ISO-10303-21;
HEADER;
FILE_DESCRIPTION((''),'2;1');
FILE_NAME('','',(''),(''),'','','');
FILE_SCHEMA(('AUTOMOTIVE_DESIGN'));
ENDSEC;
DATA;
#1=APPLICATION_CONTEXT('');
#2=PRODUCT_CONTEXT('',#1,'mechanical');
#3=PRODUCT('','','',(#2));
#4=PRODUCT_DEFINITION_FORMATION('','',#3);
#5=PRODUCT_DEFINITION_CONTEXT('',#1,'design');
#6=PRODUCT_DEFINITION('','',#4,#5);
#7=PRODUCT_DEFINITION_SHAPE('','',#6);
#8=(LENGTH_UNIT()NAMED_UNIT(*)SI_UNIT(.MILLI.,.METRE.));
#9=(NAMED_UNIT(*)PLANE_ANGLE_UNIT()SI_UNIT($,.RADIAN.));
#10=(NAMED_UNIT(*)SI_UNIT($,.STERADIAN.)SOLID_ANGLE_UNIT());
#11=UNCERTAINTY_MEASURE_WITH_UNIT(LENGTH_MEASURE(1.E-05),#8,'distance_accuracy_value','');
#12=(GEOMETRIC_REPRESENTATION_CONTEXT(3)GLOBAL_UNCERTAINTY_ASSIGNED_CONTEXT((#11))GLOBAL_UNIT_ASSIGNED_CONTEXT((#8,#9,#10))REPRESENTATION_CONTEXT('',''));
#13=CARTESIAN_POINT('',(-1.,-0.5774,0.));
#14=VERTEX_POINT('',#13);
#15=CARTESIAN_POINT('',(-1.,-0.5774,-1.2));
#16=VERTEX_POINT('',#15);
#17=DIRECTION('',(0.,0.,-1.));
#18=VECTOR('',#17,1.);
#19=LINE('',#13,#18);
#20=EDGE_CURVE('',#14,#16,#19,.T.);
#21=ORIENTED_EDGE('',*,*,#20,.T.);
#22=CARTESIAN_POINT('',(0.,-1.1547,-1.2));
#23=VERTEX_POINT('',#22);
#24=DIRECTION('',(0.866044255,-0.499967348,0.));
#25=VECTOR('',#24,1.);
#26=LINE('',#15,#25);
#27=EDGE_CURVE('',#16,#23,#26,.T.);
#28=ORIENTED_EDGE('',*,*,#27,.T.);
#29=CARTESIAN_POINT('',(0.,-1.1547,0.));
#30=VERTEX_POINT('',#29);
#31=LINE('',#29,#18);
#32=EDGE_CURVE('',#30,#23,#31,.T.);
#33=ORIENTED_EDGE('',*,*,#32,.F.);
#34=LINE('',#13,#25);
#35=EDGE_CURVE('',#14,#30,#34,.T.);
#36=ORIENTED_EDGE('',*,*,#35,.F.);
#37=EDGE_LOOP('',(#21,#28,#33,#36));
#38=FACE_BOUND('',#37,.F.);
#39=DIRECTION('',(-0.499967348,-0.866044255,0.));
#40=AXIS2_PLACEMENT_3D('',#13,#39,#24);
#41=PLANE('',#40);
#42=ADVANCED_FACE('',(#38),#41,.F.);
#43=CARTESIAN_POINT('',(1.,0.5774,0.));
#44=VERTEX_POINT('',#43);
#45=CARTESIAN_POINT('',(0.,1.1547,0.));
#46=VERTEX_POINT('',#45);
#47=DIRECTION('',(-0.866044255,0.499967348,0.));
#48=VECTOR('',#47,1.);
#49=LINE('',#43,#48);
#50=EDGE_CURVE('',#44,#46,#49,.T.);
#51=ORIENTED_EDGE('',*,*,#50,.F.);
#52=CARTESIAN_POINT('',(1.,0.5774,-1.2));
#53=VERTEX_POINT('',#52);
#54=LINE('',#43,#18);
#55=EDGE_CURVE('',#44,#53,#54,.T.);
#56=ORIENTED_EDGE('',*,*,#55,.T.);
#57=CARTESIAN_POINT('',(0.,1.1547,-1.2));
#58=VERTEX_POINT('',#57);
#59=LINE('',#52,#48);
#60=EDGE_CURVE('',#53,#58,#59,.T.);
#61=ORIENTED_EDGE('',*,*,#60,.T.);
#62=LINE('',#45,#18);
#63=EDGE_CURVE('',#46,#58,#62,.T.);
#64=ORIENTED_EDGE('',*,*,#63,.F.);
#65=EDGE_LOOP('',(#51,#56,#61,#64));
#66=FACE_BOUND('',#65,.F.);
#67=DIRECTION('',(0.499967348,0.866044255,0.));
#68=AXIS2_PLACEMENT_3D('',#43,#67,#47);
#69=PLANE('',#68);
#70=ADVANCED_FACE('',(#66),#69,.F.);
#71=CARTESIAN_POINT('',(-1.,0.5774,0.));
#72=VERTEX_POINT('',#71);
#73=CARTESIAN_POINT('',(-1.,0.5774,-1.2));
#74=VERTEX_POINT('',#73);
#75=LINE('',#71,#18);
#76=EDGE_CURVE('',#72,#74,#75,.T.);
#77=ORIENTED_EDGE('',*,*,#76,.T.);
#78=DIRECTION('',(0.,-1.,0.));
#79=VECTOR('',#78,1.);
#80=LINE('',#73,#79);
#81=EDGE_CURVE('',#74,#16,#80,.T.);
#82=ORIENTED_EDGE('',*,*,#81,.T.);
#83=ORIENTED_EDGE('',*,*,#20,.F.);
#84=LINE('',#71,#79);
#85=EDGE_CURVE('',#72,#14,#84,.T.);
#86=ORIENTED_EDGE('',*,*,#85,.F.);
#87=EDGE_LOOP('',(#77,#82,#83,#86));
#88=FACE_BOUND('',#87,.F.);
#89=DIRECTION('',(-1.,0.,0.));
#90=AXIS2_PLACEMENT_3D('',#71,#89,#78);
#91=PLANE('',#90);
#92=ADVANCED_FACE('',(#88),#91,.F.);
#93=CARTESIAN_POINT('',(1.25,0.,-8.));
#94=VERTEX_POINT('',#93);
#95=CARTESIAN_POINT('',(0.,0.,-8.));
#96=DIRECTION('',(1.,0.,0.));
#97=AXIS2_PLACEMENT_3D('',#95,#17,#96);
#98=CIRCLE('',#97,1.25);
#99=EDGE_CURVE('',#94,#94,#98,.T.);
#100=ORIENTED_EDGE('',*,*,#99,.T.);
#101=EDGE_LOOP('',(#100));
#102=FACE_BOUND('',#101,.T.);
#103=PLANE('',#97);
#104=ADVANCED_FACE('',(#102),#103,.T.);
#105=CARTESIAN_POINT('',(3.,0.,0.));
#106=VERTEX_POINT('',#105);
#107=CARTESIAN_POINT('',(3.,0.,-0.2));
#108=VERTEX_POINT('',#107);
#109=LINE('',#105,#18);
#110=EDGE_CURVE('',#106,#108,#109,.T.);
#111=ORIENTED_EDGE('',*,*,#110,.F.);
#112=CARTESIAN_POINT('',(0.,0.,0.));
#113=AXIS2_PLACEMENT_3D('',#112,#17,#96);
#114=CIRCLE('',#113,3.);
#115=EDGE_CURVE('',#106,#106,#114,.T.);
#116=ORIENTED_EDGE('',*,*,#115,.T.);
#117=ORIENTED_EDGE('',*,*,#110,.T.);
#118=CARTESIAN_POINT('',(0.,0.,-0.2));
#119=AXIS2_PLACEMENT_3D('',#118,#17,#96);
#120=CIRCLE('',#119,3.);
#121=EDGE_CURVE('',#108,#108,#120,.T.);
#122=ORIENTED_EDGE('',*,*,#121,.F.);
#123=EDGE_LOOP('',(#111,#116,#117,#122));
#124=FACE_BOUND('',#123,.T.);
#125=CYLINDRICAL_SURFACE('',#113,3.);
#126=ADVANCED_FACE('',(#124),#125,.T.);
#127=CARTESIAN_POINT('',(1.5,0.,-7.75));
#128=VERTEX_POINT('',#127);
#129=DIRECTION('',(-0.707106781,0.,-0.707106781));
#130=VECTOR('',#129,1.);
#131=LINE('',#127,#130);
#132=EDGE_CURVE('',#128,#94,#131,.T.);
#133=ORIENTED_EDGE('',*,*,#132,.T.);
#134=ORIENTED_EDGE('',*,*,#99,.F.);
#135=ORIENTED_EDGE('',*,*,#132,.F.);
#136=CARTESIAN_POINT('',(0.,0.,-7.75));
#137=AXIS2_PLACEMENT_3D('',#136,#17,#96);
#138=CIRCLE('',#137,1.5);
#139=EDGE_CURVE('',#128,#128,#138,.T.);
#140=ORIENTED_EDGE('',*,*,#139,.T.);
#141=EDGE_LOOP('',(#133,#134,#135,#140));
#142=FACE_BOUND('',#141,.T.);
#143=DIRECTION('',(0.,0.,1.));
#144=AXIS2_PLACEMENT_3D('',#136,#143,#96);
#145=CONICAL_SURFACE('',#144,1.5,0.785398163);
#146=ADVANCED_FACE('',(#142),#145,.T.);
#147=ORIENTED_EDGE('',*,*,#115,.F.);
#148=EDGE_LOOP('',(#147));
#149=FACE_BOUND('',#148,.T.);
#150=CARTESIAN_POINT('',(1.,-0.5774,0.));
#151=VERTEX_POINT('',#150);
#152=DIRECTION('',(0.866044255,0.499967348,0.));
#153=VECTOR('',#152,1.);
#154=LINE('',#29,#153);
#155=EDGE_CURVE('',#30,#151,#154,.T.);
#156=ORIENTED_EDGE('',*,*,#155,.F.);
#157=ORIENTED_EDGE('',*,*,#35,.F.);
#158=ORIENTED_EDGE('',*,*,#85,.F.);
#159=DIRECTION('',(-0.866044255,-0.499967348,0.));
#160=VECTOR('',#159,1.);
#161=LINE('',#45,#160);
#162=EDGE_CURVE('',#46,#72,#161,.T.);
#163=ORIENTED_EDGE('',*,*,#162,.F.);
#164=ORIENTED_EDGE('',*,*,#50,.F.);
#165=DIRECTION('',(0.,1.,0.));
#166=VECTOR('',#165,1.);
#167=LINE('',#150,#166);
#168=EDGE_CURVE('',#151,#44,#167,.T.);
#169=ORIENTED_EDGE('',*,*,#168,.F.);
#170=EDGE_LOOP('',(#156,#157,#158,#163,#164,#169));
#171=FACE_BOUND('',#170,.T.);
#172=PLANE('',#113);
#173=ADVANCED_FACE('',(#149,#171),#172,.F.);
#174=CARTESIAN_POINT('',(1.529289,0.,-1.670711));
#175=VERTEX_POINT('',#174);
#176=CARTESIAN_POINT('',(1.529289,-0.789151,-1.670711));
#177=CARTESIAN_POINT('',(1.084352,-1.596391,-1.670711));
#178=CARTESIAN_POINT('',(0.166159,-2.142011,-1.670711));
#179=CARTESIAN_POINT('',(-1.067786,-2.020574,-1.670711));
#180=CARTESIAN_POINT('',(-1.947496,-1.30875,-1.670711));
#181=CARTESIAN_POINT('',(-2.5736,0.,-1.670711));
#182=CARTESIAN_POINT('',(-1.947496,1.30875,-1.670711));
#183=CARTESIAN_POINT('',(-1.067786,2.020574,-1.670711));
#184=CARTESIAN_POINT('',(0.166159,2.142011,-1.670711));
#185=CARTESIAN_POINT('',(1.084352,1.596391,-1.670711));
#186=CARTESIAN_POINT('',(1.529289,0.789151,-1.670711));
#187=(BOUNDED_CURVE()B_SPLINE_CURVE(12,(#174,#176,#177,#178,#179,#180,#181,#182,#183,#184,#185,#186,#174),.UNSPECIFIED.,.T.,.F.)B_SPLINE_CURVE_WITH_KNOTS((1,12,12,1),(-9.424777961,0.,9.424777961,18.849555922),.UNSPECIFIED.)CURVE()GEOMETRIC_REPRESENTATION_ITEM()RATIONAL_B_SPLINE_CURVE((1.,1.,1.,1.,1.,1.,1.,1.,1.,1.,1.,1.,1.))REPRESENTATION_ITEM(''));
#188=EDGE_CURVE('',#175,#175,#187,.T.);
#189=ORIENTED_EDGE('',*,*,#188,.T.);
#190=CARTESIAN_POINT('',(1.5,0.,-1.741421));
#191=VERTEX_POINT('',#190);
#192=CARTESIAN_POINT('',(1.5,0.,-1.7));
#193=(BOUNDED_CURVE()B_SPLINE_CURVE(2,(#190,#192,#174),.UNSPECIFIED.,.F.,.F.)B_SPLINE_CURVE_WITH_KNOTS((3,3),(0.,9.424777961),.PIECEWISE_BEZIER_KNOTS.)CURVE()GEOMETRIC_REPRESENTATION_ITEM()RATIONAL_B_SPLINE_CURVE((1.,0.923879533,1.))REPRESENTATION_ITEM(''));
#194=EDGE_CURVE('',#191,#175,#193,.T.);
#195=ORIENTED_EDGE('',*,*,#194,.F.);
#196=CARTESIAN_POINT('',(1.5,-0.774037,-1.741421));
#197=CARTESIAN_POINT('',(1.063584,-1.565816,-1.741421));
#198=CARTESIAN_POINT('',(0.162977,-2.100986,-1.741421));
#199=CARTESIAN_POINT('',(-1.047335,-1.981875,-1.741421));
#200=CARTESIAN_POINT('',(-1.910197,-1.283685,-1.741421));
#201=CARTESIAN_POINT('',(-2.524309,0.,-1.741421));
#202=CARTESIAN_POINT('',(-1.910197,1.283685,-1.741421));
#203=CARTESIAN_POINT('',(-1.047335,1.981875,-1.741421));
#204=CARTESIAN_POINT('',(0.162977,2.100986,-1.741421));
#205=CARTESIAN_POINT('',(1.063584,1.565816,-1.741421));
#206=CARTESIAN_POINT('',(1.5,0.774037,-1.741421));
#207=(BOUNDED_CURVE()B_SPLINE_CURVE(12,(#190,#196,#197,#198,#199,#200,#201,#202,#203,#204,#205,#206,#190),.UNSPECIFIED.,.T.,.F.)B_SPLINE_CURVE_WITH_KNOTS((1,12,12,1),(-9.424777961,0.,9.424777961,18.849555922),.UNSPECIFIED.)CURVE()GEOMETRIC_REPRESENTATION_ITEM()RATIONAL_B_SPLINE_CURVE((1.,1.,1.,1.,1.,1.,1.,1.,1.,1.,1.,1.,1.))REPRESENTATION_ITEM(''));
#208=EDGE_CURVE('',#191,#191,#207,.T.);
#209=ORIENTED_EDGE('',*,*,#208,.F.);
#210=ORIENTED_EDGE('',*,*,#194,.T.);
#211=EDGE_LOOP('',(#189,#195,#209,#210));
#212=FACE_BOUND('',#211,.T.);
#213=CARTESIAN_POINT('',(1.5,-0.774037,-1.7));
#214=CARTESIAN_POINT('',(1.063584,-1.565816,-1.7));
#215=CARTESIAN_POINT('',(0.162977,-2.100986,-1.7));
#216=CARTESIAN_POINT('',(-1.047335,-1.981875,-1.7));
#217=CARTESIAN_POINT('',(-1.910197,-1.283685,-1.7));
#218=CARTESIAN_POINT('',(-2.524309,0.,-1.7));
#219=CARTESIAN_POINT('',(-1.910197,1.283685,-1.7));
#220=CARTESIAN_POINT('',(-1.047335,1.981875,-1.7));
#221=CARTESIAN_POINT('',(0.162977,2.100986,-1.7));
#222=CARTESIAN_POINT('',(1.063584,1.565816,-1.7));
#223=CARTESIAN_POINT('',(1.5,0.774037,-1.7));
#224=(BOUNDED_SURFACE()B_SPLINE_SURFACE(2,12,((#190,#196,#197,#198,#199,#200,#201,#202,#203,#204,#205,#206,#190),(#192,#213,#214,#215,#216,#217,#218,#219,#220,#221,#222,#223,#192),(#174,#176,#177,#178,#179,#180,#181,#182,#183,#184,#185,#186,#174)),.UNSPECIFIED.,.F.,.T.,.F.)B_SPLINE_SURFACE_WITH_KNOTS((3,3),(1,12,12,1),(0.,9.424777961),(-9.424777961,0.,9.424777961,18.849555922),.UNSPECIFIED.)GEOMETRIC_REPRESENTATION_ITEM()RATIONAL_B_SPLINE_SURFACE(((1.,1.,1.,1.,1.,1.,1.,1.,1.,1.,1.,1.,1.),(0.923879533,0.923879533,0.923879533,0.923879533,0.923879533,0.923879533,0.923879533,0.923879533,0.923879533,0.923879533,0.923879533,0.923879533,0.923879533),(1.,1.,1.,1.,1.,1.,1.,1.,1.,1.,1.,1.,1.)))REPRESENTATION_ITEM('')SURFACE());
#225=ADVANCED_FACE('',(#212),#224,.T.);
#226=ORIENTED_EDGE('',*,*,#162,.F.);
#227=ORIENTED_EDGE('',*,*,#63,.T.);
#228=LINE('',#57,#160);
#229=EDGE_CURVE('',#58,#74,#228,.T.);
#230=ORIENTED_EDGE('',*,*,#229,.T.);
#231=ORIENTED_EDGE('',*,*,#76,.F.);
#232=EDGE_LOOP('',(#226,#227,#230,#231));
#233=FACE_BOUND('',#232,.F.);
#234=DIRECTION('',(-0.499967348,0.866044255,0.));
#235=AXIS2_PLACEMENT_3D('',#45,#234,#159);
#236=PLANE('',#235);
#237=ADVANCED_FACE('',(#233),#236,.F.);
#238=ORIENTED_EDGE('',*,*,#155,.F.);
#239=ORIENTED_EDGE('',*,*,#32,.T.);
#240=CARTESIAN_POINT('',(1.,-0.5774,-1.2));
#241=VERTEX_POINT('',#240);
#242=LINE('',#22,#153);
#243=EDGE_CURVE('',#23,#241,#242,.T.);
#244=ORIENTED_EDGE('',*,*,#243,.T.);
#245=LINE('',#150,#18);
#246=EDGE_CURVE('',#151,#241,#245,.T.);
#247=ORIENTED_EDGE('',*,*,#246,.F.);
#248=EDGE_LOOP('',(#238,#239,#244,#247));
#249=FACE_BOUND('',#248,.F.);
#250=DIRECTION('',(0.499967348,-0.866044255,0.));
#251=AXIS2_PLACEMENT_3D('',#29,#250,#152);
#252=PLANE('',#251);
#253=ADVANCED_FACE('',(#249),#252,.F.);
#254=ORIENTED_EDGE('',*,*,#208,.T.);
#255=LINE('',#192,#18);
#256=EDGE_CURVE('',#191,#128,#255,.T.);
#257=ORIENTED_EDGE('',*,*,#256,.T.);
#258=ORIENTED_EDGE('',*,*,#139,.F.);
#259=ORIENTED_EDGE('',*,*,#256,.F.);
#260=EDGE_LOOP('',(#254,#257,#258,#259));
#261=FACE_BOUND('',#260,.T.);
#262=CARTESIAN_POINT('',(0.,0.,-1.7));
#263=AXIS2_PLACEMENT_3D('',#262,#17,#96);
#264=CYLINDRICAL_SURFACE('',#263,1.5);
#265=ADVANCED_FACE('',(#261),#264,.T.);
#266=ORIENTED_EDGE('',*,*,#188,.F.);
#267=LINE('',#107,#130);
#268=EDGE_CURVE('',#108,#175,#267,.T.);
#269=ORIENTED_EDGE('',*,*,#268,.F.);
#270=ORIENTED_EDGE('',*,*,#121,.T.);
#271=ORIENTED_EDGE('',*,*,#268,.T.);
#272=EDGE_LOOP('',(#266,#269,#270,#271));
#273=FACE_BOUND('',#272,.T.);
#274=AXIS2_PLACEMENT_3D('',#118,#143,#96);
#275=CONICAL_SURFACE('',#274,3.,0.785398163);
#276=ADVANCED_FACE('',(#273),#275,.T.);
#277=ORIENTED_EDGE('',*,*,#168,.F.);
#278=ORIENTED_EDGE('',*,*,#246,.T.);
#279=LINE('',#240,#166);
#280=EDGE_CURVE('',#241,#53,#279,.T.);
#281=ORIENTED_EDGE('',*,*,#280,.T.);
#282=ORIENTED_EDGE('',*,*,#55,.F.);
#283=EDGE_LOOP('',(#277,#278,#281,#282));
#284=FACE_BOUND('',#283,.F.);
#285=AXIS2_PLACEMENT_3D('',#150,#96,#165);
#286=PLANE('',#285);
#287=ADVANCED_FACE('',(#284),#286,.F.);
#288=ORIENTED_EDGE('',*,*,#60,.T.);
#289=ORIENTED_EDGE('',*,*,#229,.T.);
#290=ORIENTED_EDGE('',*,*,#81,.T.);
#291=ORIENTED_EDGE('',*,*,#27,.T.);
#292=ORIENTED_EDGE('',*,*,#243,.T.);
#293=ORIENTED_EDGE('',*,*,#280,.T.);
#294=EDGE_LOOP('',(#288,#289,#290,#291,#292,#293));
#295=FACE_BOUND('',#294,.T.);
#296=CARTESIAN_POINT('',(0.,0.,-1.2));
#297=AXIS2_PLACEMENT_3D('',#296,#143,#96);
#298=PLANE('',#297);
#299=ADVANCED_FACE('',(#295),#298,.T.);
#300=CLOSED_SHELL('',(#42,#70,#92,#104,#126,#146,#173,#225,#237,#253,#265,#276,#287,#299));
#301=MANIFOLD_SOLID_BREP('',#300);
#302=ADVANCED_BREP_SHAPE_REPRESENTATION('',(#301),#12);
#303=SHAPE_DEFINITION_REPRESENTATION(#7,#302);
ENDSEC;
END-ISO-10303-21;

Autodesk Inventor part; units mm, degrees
ref_plane "YZ Plane" through (0, 0, 0) normal (1, 0, 0) x (0, 1, 0)
sketch "Skizze1" plane through (0, 0, 0) normal (0, 1, 0) x (-1, 0, 0)
  point P0 (0, 0)
sketch "Skizze2" plane through (0, 0, 0) normal (0, 1, 0) x (-1, 0, 0)
  line L0 (-1.5, -8) -> (0, -8)
  line L1 (-1.5, -1.7) -> (-1.5, -8)
  line L2 (-3, -0.2) -> (-1.5, -1.7)
  line L3 (-3, 0) -> (-3, -0.2)
  line L4 (0, 0) -> (-3, 0)
  line L5 (0, -8) -> (0, 0)
  line L6 (0, -8) -> (0, 0)
  line L7 (0, -9.6) -> (0, 1.6) projected
  line L8 (0.6, 0) -> (-3.6, 0) projected
  dimension "d3" = 3
  dimension "d5" = 1.5
  dimension "d7" = 8
  dimension "ParC" = 0.2
  dimension "d22" = 0
  dimension "d23" = 0
  dimension "d43" = 45
revolve "Drehung1" add sketch "Skizze2" angle 360 about axis through (0, 0, -8) along (0, 0, -1)
sketch "Skizze3" plane through (0, 0, 0) normal (0, 0, 1) x (1, 0, 0)
  line L0 (-1, 0.5774) -> (-1, -0.5774)
  line L1 (0, 1.1547) -> (-1, 0.5774)
  line L2 (1, 0.5774) -> (0, 1.1547)
  line L3 (1, -0.5774) -> (1, 0.5774)
  line L4 (0, -1.1547) -> (1, -0.5774)
  line L5 (-1, -0.5774) -> (0, -1.1547)
  circle A0 centre (0, 0) radius 1 construction
  circle A1 centre (0, 0) radius 1.5 construction
  dimension "d11" = 2
  dimension "d13" = 120
  dimension "d15" = 120
extrude "Extrusion1" cut sketch "Skizze3" against normal blind 1.2
fillet "Rundung1" radius 0.1 1 edges at (-1.5, 0, -1.7)
chamfer "Fase1" distance 0.25 angle 45 1 edges at (-1.5, 0, -8) measured on face at (1.4041, 0.5277, -5.9138)
thread "Gewinde1" size "M3x0.5" class "6g" standard "ISO Metric profile" length 5.3
ref_plane "MSC_PF1" through (0, 0, 0) normal (1, 0, 0) x (0, 1, 0)
ref_plane "MSC_PT1" through (0, 0, 0) normal (0, 0, -1) x (-1, 0, 0)
equation "\"d19\" = 0.5 * PTC"
equation "\"d39\" = 0.5 * PTC"
equation "\"d3\" = 0.5 * dk"
equation "\"d5\" = 0.5 * NND"
equation "\"d7\" = NLG"
equation "\"d43\" = 0.5 * ang"
equation "\"d11\" = ParS"
equation "\"d16\" = ParT"
equation "\"d18\" = r"
equation "\"NND\" = 3"
equation "\"PTC\" = 0.5"
equation "\"dk\" = 6"
equation "\"ParK\" = 1.7"
equation "\"ParS\" = 2"
equation "\"ParT\" = 1.2"
equation "\"r\" = 0.1"
equation "\"NLG\" = 8"
equation "\"ang\" = 90deg"
equation "\"THREADDIA\" = NND"
properties part number "DIN 7991 - M3x8" material "Stahl, weich"
